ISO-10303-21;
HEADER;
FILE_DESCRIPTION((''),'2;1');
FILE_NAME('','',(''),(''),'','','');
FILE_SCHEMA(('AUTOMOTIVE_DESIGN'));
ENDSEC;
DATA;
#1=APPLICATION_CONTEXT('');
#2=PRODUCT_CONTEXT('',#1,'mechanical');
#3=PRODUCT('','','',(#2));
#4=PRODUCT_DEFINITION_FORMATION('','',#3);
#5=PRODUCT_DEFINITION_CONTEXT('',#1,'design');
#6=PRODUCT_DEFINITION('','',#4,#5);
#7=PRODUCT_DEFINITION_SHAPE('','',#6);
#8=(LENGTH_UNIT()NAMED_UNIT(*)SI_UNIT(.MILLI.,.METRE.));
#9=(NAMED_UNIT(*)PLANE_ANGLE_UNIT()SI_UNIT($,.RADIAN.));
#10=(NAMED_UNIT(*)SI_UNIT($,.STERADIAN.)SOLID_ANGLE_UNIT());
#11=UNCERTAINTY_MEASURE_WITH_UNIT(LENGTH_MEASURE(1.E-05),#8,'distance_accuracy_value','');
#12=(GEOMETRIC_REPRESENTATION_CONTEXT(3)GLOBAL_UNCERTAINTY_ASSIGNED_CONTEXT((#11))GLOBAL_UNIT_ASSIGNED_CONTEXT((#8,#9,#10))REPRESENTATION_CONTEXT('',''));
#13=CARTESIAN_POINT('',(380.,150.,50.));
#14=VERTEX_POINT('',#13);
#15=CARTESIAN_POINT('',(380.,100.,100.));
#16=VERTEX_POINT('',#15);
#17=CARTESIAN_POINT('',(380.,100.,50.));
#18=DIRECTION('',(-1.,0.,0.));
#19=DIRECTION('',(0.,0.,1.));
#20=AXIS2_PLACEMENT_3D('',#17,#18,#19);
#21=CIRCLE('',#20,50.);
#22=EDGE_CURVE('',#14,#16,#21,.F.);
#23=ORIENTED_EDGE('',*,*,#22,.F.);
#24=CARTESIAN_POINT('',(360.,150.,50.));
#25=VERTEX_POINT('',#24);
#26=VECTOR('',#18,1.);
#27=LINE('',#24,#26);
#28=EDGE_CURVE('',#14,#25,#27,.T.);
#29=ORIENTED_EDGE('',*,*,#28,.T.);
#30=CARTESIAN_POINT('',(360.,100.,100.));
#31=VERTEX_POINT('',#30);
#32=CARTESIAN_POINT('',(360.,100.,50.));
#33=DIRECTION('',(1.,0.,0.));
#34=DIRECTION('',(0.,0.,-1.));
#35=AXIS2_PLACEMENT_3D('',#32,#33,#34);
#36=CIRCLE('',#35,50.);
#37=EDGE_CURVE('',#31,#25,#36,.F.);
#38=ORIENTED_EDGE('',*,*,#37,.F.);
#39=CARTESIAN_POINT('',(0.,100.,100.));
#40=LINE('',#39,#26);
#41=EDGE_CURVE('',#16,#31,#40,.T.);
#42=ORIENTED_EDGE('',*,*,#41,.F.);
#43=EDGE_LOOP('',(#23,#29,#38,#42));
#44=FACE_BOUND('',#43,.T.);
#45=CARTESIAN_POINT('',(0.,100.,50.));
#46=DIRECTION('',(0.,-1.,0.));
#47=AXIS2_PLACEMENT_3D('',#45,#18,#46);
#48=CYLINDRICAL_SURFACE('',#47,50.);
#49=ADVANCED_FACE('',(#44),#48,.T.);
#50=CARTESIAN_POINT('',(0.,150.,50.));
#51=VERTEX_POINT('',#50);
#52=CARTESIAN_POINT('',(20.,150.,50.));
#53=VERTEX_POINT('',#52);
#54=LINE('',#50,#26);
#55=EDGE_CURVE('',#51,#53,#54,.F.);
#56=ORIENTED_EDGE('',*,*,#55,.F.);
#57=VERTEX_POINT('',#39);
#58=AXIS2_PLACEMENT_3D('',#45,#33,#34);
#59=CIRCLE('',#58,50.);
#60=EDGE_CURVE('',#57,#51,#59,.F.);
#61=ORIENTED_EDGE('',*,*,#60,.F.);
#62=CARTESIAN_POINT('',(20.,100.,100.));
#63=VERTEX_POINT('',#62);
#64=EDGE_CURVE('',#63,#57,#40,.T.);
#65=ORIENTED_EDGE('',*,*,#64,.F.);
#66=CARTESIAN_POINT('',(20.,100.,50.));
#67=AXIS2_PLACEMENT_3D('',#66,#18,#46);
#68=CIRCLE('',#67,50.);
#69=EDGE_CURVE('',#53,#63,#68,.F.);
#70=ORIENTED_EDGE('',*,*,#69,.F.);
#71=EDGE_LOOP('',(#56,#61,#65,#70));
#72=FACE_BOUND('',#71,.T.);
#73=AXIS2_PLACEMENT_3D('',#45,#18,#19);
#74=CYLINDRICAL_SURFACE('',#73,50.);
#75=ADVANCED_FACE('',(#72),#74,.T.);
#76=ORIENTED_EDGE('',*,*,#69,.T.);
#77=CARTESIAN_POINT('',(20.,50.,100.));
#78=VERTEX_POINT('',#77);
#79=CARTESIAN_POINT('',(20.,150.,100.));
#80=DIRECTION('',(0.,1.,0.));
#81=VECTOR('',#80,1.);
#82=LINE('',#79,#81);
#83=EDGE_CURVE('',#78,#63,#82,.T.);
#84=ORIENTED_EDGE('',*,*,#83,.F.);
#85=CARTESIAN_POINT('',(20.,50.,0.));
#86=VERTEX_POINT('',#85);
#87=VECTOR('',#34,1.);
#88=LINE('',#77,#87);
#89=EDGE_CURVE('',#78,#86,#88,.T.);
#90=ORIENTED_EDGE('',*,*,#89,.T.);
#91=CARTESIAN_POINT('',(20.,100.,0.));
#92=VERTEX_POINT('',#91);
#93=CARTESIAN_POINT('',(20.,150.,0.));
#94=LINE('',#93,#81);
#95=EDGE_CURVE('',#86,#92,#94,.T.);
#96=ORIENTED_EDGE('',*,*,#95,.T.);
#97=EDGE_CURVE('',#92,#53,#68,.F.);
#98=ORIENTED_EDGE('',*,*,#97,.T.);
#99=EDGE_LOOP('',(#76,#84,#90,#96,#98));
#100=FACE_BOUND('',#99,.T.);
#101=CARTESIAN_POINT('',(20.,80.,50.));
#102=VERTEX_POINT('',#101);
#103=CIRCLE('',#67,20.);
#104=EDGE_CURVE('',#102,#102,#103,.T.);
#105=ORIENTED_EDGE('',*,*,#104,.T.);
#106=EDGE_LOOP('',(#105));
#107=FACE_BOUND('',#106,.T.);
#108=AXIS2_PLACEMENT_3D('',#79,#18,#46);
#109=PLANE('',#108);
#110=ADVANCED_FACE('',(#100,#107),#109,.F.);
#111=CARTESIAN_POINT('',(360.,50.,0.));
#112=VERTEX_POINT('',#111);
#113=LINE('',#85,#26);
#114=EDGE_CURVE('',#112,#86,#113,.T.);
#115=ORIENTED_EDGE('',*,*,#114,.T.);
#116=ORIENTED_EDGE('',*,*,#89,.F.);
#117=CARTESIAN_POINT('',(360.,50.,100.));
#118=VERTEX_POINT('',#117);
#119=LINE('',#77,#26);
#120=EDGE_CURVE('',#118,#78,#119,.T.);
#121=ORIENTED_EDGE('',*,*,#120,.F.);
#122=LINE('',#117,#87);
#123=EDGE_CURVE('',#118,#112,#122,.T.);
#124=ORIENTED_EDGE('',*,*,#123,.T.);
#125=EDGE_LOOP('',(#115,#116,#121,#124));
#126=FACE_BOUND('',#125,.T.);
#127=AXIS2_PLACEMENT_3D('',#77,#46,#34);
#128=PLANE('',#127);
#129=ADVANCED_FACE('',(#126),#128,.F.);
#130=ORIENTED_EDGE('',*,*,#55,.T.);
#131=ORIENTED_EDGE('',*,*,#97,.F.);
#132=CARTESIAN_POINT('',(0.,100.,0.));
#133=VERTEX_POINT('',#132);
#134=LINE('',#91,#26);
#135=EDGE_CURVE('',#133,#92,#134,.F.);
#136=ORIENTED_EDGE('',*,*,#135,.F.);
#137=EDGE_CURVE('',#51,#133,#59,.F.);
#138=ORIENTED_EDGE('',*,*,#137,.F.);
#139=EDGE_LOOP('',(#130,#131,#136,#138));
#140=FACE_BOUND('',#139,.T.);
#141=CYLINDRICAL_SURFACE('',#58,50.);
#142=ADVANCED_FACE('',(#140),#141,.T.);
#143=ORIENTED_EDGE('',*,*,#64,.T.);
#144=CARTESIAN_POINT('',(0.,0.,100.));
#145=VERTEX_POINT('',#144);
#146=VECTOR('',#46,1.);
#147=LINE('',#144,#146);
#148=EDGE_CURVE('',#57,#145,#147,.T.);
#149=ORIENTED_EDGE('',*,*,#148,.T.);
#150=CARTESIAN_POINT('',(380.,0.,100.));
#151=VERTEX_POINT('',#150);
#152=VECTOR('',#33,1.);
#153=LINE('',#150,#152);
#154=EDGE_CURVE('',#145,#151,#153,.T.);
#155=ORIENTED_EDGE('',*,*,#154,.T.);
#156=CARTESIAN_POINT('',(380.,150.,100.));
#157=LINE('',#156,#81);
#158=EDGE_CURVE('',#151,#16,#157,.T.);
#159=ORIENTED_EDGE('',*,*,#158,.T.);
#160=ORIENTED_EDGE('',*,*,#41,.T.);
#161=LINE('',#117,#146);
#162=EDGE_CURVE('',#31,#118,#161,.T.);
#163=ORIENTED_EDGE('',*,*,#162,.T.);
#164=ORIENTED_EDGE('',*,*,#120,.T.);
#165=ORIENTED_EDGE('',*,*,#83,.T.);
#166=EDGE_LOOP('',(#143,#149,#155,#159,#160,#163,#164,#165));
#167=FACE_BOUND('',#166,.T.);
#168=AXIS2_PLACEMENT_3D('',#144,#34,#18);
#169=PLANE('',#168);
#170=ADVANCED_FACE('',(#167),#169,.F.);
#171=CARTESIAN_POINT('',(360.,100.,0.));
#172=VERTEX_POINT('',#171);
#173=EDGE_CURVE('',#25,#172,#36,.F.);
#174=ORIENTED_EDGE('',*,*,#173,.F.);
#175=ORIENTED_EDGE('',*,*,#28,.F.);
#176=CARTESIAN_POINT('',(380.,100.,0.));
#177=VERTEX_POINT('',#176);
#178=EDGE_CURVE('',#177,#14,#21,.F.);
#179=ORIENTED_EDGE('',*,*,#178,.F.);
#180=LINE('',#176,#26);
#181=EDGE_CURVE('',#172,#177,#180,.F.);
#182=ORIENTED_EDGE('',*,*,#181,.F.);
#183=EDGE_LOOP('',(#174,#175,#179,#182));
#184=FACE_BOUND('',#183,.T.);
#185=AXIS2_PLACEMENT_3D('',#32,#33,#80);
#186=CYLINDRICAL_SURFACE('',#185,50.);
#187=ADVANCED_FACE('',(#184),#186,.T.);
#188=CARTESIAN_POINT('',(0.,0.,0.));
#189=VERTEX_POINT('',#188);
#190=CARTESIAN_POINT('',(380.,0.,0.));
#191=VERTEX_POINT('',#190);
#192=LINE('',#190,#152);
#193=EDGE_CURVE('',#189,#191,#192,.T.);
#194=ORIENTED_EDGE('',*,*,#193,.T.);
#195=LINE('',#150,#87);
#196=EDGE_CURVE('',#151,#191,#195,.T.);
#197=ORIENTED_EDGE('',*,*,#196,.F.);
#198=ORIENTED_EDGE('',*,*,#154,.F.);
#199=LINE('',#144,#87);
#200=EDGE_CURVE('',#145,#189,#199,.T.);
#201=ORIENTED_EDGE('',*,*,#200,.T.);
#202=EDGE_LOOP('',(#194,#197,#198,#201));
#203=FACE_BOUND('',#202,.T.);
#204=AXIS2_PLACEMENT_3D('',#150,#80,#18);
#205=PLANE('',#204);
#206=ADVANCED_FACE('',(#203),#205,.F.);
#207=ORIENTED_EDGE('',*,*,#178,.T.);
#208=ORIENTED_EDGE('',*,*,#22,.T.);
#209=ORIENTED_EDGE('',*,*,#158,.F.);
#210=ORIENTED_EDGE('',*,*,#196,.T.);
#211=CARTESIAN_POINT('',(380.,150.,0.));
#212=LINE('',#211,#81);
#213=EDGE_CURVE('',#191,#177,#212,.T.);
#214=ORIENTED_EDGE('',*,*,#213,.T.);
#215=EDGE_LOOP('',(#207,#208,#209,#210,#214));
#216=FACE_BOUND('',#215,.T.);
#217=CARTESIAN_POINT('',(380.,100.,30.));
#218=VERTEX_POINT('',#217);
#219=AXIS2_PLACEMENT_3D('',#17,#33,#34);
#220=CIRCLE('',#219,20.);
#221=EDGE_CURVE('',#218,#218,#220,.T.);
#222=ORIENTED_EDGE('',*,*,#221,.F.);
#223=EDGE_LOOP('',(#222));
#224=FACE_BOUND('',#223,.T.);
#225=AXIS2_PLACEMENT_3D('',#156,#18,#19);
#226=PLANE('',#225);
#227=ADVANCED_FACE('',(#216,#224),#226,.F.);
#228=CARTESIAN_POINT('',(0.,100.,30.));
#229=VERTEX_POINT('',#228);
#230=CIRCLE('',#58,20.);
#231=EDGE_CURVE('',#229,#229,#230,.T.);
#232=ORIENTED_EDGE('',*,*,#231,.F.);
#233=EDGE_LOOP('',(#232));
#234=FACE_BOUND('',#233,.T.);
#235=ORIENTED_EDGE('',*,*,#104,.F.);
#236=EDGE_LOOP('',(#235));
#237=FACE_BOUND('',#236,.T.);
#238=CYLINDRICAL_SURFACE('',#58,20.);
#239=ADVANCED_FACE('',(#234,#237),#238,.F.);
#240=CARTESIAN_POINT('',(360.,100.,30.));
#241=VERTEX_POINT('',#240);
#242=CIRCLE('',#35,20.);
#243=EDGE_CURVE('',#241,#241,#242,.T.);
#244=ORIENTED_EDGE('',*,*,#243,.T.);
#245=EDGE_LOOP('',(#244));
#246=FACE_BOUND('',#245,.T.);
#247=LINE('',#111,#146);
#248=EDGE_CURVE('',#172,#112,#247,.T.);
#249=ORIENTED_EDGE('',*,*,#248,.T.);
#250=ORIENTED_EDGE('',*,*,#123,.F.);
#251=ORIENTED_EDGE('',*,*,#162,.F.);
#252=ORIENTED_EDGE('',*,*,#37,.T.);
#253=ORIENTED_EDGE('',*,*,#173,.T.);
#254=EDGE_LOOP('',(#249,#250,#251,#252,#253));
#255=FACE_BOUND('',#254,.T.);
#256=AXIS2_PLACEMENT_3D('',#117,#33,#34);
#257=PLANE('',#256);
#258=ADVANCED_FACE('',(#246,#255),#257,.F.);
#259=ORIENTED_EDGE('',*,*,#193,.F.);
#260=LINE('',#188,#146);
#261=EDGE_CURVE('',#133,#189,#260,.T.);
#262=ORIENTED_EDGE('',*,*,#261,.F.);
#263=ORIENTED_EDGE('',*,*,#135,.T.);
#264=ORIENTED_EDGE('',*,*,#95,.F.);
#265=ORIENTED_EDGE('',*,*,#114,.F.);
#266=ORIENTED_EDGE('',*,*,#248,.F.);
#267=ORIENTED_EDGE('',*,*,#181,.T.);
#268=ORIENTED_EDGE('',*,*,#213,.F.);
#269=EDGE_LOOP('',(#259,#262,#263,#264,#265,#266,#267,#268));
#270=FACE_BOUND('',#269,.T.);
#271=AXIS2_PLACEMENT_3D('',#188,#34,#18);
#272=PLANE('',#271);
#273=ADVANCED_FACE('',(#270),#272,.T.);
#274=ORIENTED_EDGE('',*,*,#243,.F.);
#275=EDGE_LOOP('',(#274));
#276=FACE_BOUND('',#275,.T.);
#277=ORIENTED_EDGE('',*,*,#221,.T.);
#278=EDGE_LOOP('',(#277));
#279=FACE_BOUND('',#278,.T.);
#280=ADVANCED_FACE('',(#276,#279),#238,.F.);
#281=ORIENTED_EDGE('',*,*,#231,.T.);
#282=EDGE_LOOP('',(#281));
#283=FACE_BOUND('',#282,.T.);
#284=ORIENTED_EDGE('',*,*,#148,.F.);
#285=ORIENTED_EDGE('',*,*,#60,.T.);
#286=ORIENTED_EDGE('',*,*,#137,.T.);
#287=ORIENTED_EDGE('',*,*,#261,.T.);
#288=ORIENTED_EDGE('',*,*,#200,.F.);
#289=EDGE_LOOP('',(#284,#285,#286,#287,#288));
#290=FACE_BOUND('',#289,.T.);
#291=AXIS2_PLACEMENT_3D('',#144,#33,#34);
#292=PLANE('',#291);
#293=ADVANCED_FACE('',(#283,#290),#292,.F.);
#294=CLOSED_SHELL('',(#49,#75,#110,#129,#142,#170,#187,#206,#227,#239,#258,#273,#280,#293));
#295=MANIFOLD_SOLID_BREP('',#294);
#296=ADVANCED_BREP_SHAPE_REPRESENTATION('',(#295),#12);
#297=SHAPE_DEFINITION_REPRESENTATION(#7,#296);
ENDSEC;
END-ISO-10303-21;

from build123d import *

# Parameters (mm, degrees)
BOSS_EXTRUDE1_DEPTH = 100
FILLET4_R           = 50
SKETCH5_R           = 20
CUT_EXTRUDE1_DEPTH  = 421.594816896


with BuildPart() as part:
    # Sketch2 → Boss-Extrude1 (new body)
    with BuildSketch(Plane.XY):
        Polygon((0, 0), (0, 150), (20, 150), (20, 50), (360, 50), (360, 150), (380, 150), (380, 0), align=None)
    extrude(amount=BOSS_EXTRUDE1_DEPTH)

    # Fillet4
    fillet4_edges = [part.edges().sort_by_distance(p)[0] for p in [
        (10, 150, 0),
        (10, 150, 100),
        (370, 150, 100),
        (370, 150, 0),
    ]]
    fillet(fillet4_edges, radius=FILLET4_R - 0.0001)  # a hair under: the kernel refuses the full size

    # Sketch5 → Cut-Extrude1 (cut, through all)
    with BuildSketch(Plane(origin=(380, 0, 0), x_dir=(0, 0, -1), z_dir=(1, 0, 0))):
        with Locations((-50, 100)):
            Circle(SKETCH5_R)
    extrude(amount=-CUT_EXTRUDE1_DEPTH, mode=Mode.SUBTRACT)


solid = part.part
